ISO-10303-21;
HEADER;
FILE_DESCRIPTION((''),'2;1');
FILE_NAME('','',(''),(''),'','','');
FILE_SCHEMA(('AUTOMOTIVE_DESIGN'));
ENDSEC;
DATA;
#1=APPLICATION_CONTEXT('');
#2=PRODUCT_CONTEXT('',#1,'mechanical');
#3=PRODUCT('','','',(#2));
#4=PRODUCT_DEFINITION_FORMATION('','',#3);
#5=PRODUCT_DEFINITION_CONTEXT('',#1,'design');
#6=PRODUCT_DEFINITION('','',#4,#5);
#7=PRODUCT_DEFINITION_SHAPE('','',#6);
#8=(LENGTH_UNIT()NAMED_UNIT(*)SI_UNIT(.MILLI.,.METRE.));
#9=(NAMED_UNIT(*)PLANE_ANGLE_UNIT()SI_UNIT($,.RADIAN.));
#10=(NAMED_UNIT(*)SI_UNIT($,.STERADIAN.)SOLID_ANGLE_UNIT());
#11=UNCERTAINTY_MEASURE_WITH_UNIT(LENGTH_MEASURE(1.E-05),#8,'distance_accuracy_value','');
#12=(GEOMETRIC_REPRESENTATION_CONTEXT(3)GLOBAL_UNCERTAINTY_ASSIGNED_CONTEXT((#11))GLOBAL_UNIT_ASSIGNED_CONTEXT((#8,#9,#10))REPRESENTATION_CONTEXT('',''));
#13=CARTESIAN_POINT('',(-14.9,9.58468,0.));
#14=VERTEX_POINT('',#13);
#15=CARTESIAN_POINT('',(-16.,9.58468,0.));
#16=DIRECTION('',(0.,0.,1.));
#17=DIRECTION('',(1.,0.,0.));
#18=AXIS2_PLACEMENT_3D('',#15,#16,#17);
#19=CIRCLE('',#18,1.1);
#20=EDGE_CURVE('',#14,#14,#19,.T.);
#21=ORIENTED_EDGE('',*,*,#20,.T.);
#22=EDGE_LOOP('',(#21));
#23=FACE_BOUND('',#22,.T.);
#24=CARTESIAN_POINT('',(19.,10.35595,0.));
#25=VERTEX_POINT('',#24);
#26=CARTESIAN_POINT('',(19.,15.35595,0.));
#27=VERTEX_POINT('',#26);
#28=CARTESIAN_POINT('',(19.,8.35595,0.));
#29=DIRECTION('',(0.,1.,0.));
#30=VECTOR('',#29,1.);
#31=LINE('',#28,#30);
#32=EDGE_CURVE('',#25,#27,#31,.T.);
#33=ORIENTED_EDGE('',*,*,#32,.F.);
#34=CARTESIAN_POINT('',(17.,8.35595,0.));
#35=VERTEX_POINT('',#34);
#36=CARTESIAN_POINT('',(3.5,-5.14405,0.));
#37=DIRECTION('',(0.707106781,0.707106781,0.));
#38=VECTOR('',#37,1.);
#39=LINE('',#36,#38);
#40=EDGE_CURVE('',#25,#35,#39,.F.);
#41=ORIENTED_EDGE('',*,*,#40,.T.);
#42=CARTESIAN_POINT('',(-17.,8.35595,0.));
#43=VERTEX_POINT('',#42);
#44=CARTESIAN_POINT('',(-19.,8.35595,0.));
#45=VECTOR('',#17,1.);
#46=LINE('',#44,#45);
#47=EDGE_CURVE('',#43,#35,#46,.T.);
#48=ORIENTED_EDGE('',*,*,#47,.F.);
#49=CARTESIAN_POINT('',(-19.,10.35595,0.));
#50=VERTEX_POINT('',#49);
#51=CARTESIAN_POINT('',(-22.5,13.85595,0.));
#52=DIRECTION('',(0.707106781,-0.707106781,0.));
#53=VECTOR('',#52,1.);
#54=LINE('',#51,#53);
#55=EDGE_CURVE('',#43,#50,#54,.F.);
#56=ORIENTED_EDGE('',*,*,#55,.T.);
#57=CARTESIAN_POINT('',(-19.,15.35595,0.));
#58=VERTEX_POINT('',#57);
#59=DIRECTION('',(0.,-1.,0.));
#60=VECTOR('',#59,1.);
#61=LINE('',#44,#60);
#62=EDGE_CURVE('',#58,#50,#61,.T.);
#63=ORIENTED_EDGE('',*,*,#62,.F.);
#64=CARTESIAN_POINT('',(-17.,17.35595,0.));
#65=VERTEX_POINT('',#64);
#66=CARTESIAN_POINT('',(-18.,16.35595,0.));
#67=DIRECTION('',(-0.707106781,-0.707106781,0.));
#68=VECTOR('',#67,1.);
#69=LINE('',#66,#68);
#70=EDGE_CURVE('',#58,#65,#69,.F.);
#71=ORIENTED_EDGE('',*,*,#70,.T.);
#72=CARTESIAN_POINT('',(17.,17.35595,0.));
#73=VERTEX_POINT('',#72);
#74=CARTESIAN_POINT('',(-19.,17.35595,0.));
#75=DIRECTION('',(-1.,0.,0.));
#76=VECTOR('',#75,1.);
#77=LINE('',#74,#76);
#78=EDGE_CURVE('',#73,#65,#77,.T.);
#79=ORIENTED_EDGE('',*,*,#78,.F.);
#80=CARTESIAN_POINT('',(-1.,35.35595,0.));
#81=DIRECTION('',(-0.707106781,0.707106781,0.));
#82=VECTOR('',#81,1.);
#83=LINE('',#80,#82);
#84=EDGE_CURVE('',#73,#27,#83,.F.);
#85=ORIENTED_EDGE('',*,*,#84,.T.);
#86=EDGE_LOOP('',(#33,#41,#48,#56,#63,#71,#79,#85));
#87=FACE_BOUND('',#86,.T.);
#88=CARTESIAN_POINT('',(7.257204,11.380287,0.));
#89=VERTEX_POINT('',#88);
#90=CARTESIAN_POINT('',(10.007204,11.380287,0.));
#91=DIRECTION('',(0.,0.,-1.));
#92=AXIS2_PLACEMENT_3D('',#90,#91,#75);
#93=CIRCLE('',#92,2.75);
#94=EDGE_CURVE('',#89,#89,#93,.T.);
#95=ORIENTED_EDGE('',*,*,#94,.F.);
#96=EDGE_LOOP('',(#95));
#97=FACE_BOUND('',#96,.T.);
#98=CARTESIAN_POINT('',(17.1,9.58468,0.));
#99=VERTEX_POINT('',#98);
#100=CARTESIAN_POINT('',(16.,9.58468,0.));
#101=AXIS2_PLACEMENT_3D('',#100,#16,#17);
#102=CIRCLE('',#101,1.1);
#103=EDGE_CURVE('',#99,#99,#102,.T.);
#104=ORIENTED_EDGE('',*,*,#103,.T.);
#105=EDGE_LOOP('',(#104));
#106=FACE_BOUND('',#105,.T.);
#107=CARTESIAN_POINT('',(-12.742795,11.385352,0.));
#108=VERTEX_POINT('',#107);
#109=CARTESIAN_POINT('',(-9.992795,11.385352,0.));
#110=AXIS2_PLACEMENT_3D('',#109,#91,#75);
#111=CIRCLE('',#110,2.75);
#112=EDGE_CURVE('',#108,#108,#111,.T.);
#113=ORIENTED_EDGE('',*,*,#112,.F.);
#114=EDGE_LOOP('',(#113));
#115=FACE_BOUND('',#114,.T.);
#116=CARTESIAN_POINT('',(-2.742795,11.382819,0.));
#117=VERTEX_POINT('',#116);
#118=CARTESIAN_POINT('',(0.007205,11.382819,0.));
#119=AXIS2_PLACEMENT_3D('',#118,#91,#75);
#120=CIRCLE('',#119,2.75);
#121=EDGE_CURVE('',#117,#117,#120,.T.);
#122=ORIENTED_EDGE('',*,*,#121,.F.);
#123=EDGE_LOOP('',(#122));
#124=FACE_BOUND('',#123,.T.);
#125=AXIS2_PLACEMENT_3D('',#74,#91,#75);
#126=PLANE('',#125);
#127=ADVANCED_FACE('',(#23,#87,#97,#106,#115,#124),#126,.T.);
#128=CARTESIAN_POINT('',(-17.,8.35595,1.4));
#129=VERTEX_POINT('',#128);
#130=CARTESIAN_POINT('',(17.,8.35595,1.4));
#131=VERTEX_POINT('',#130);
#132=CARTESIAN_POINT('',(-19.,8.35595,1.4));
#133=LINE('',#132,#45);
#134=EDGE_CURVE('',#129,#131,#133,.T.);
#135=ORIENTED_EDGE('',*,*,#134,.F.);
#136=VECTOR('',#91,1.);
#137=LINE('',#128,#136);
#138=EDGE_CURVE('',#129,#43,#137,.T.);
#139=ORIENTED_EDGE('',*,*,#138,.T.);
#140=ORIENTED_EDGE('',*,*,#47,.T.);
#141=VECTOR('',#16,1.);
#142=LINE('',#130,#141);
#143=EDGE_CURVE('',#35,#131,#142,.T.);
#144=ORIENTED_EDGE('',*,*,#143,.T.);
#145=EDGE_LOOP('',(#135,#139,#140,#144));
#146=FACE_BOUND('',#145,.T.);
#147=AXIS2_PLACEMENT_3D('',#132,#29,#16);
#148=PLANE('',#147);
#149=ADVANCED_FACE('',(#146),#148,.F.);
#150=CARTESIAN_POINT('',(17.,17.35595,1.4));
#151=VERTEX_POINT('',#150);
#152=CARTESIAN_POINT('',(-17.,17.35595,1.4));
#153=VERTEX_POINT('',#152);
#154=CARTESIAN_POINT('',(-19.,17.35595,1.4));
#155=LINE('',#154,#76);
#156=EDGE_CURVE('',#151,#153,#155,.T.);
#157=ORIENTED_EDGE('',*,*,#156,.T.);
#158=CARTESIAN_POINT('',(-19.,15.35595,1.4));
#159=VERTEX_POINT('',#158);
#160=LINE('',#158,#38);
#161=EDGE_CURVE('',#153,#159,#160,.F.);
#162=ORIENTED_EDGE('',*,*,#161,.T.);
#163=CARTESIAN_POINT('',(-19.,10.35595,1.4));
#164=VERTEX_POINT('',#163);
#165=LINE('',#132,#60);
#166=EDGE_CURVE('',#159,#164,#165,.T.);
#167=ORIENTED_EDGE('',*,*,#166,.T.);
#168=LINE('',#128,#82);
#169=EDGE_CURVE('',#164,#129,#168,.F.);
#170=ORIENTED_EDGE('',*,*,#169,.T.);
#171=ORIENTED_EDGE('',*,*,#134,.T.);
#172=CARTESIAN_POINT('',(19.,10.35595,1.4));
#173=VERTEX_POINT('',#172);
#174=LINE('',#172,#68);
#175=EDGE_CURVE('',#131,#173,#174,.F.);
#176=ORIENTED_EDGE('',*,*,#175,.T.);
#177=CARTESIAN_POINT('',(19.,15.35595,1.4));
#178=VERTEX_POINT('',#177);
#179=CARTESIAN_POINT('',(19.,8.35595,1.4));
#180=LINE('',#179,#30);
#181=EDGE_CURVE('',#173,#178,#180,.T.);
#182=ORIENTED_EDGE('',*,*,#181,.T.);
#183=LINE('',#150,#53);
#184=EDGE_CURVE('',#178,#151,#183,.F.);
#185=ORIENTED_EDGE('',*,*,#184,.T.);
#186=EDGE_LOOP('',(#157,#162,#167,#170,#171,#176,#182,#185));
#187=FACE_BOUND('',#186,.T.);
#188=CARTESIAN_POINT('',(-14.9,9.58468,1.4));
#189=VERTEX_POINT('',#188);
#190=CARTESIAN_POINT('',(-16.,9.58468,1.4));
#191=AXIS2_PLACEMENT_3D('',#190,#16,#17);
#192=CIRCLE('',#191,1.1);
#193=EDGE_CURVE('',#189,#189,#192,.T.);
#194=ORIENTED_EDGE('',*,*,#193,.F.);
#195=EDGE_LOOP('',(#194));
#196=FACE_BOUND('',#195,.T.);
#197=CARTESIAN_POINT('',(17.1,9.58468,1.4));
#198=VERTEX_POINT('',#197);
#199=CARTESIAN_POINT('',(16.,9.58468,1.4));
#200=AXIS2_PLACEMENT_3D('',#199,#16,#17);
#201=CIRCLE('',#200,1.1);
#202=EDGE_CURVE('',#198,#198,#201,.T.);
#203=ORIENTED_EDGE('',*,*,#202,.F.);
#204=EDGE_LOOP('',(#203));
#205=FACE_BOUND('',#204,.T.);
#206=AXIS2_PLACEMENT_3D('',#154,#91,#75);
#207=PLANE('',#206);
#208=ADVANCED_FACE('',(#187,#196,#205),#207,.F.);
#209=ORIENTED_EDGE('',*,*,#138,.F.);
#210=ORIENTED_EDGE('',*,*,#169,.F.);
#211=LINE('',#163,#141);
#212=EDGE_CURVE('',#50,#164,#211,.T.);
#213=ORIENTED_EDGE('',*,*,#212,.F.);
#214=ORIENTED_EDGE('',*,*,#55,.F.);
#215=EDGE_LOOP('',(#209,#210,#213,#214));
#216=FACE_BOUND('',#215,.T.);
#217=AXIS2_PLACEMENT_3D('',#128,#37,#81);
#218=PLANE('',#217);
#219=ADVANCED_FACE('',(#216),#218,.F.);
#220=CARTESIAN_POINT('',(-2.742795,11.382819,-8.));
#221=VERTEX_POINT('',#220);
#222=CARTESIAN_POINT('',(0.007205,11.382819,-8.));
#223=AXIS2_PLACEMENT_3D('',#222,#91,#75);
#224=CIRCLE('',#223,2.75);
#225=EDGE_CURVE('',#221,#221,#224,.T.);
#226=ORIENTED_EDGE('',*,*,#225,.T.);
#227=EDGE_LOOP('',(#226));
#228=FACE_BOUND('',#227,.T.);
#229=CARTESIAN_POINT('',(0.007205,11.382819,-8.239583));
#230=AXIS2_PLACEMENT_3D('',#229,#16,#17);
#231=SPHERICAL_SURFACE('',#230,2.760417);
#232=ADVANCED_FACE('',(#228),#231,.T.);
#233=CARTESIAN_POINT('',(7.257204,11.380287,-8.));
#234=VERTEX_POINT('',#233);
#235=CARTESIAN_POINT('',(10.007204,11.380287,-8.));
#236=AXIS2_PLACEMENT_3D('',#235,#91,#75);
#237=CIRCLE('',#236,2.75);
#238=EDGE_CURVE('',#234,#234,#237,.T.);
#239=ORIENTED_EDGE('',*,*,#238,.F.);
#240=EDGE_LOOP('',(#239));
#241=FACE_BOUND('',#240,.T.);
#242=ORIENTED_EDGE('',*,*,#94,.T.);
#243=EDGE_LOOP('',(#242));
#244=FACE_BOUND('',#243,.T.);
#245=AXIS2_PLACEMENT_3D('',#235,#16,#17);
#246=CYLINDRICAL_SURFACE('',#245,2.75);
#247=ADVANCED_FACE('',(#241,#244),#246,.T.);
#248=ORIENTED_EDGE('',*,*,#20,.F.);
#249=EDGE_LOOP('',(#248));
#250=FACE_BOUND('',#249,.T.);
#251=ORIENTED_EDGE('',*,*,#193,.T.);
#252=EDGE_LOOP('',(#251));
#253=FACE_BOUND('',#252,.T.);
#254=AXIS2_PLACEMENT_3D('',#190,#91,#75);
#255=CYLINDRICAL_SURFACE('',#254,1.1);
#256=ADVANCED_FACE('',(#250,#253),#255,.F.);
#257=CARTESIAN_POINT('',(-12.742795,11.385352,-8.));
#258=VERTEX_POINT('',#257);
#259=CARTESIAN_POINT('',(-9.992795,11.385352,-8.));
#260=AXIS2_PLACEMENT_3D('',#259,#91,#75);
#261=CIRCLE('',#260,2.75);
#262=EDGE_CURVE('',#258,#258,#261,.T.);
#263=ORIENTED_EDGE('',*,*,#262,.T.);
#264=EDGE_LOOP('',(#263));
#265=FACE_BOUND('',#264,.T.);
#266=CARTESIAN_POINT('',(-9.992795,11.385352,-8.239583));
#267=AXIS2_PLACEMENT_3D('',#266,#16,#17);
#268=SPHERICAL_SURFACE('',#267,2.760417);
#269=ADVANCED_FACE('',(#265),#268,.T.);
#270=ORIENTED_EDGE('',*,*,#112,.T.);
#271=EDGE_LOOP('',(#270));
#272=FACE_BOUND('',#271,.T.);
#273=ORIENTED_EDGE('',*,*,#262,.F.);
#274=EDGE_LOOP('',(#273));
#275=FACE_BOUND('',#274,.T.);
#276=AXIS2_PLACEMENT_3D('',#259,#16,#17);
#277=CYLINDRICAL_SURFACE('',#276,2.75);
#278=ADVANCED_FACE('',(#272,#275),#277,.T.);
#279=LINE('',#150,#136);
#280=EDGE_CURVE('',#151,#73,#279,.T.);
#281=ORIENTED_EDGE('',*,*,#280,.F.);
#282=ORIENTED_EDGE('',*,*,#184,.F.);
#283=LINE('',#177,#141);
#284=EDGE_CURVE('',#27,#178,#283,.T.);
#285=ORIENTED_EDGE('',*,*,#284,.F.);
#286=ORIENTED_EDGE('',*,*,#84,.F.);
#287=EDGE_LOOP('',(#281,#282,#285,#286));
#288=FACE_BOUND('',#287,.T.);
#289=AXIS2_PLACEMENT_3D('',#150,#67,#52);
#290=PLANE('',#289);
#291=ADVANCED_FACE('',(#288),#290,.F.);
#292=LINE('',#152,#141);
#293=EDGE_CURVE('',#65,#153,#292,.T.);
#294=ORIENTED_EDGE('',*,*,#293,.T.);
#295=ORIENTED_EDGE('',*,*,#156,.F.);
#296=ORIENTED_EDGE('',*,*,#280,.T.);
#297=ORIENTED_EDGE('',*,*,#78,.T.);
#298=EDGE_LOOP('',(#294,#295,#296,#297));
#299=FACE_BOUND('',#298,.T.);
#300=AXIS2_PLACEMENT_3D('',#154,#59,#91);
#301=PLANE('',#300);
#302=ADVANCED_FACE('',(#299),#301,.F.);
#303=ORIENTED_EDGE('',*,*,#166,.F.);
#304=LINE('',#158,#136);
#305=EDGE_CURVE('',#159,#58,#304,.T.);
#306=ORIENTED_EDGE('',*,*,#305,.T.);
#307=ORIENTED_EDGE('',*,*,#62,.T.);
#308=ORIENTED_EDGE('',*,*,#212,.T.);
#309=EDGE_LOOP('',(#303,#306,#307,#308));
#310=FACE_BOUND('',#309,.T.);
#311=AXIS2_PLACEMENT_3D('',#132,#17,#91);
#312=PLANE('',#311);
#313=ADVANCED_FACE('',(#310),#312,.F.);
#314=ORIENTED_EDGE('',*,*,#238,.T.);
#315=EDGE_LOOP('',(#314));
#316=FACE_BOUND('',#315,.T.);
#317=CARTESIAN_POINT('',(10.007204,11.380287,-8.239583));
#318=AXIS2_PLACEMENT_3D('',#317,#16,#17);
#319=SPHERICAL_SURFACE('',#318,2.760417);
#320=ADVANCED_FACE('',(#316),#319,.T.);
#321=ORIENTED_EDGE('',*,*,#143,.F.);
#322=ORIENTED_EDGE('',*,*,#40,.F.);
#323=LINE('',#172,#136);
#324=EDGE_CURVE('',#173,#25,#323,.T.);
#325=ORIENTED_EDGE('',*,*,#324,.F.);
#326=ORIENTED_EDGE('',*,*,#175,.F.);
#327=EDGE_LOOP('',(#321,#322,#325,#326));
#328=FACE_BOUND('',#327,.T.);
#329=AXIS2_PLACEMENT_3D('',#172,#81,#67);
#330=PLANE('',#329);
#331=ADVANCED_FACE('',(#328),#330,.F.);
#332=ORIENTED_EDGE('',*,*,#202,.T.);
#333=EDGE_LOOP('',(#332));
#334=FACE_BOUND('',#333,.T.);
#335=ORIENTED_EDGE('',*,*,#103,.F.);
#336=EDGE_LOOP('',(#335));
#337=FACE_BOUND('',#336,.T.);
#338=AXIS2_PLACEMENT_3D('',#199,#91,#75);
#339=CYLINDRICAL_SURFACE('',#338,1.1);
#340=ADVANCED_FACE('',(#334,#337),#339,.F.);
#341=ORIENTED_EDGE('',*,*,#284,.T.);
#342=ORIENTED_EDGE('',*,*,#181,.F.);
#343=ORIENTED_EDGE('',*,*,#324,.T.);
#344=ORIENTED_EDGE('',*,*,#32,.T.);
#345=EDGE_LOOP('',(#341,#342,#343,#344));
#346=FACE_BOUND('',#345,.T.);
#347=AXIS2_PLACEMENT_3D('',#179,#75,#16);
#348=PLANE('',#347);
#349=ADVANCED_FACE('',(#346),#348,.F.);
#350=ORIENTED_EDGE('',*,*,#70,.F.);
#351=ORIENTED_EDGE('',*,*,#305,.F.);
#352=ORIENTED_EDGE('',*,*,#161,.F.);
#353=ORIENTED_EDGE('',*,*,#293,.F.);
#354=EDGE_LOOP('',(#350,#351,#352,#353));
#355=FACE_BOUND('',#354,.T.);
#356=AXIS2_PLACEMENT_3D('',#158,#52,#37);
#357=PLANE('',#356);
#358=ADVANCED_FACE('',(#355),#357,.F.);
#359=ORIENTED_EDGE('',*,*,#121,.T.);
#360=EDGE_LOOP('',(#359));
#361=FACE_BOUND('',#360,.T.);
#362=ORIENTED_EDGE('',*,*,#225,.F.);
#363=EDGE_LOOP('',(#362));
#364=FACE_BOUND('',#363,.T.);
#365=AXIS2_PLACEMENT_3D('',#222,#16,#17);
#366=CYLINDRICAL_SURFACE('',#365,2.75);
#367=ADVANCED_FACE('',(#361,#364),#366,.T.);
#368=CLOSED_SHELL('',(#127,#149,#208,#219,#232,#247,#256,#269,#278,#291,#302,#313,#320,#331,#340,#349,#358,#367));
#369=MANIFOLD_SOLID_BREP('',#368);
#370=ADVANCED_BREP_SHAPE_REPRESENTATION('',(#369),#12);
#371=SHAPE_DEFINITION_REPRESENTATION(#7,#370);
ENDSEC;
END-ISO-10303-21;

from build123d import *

# Parameters (mm, degrees)
ESQUISSE1_W       = 38
ESQUISSE1_H       = 9
ESQUISSE1_R       = 1.1
EXTRUSION1_DEPTH  = 1.4
CHANFREIN1_SIZE   = 2
ESQUISSE3_R       = 2.75
EXTRUSION2_DEPTH  = 8
D_ME1_FACE_RADIUS = 2.75
D_ME1_HEIGHT      = 3
D_ME2_FACE_RADIUS = 2.75
D_ME2_HEIGHT      = 3


# Read off the part's stored shape, not the designer's step: Dôme3
with BuildPart() as part:
    # Esquisse1 → Extrusion1 (new body)
    with BuildSketch(Plane.XY):
        with Locations((0, 12.855949766)):
            Rectangle(ESQUISSE1_W, ESQUISSE1_H)
        with Locations((16, 9.584679883)):
            Circle(ESQUISSE1_R, mode=Mode.SUBTRACT)
        with Locations((-16, 9.584679883)):
            Circle(ESQUISSE1_R, mode=Mode.SUBTRACT)
    extrude(amount=EXTRUSION1_DEPTH)

    # Chanfrein1
    chanfrein1_edges = [part.edges().sort_by_distance(p)[0] for p in [
        (-19, 17.355949766, 0.7),
        (19, 17.355949766, 0.7),
        (19, 8.355949766, 0.7),
        (-19, 8.355949766, 0.7),
    ]]
    chamfer(chanfrein1_edges, length=CHANFREIN1_SIZE)

    # Esquisse3 → Extrusion2 (add)
    with BuildSketch(Plane(origin=(0, 0, 0), x_dir=(-1, 0, 0), z_dir=(0, 0, -1))):
        with Locations((-10.007204419, 11.380286636)):
            Circle(ESQUISSE3_R)
        with Locations((-0.007204739, 11.382819166)):
            Circle(ESQUISSE3_R)
        with Locations((9.99279494, 11.385351696)):
            Circle(ESQUISSE3_R)
    extrude(amount=EXTRUSION2_DEPTH)

    # Dôme1: a dome of height H over a round flat face of radius A is a cap of a sphere of radius (A * A + H * H) / (2 * H)
    d_me1_r = (D_ME1_FACE_RADIUS * D_ME1_FACE_RADIUS + D_ME1_HEIGHT * D_ME1_HEIGHT) / (2 * D_ME1_HEIGHT)
    d_me1_base = Plane((-9.99279494, 11.385351696, -8), z_dir=(0, 0, -1))
    with Locations(d_me1_base.offset(D_ME1_HEIGHT - d_me1_r)):
        d_me1_ball = Sphere(d_me1_r, mode=Mode.PRIVATE)
    add(split(d_me1_ball, bisect_by=d_me1_base, keep=Keep.TOP, mode=Mode.PRIVATE))

    # Dôme2: a dome of height H over a round flat face of radius A is a cap of a sphere of radius (A * A + H * H) / (2 * H)
    d_me2_r = (D_ME2_FACE_RADIUS * D_ME2_FACE_RADIUS + D_ME2_HEIGHT * D_ME2_HEIGHT) / (2 * D_ME2_HEIGHT)
    d_me2_base = Plane((0.007204739, 11.382819166, -8), z_dir=(0, 0, -1))
    with Locations(d_me2_base.offset(D_ME2_HEIGHT - d_me2_r)):
        d_me2_ball = Sphere(d_me2_r, mode=Mode.PRIVATE)
    add(split(d_me2_ball, bisect_by=d_me2_base, keep=Keep.TOP, mode=Mode.PRIVATE))

    # Dôme3 outline → Dôme3 (revolve)
    with BuildSketch(Plane(origin=(10.007204419, 11.380286636, 0), x_dir=(1, 0, 0), z_dir=(0, -1, 0))):
        with BuildLine():
            Line((0, -7.999999997), (0, -11))
            ThreePointArc((0, -11), (2.034852575, -10.104864859), (2.75, -7.999999998))
            Line((2.75, -7.999999998), (0, -7.999999997))
        make_face()
    revolve(axis=Axis((10.007204419, 11.380286636, 0), (0, 0, 1)))


solid = part.part
